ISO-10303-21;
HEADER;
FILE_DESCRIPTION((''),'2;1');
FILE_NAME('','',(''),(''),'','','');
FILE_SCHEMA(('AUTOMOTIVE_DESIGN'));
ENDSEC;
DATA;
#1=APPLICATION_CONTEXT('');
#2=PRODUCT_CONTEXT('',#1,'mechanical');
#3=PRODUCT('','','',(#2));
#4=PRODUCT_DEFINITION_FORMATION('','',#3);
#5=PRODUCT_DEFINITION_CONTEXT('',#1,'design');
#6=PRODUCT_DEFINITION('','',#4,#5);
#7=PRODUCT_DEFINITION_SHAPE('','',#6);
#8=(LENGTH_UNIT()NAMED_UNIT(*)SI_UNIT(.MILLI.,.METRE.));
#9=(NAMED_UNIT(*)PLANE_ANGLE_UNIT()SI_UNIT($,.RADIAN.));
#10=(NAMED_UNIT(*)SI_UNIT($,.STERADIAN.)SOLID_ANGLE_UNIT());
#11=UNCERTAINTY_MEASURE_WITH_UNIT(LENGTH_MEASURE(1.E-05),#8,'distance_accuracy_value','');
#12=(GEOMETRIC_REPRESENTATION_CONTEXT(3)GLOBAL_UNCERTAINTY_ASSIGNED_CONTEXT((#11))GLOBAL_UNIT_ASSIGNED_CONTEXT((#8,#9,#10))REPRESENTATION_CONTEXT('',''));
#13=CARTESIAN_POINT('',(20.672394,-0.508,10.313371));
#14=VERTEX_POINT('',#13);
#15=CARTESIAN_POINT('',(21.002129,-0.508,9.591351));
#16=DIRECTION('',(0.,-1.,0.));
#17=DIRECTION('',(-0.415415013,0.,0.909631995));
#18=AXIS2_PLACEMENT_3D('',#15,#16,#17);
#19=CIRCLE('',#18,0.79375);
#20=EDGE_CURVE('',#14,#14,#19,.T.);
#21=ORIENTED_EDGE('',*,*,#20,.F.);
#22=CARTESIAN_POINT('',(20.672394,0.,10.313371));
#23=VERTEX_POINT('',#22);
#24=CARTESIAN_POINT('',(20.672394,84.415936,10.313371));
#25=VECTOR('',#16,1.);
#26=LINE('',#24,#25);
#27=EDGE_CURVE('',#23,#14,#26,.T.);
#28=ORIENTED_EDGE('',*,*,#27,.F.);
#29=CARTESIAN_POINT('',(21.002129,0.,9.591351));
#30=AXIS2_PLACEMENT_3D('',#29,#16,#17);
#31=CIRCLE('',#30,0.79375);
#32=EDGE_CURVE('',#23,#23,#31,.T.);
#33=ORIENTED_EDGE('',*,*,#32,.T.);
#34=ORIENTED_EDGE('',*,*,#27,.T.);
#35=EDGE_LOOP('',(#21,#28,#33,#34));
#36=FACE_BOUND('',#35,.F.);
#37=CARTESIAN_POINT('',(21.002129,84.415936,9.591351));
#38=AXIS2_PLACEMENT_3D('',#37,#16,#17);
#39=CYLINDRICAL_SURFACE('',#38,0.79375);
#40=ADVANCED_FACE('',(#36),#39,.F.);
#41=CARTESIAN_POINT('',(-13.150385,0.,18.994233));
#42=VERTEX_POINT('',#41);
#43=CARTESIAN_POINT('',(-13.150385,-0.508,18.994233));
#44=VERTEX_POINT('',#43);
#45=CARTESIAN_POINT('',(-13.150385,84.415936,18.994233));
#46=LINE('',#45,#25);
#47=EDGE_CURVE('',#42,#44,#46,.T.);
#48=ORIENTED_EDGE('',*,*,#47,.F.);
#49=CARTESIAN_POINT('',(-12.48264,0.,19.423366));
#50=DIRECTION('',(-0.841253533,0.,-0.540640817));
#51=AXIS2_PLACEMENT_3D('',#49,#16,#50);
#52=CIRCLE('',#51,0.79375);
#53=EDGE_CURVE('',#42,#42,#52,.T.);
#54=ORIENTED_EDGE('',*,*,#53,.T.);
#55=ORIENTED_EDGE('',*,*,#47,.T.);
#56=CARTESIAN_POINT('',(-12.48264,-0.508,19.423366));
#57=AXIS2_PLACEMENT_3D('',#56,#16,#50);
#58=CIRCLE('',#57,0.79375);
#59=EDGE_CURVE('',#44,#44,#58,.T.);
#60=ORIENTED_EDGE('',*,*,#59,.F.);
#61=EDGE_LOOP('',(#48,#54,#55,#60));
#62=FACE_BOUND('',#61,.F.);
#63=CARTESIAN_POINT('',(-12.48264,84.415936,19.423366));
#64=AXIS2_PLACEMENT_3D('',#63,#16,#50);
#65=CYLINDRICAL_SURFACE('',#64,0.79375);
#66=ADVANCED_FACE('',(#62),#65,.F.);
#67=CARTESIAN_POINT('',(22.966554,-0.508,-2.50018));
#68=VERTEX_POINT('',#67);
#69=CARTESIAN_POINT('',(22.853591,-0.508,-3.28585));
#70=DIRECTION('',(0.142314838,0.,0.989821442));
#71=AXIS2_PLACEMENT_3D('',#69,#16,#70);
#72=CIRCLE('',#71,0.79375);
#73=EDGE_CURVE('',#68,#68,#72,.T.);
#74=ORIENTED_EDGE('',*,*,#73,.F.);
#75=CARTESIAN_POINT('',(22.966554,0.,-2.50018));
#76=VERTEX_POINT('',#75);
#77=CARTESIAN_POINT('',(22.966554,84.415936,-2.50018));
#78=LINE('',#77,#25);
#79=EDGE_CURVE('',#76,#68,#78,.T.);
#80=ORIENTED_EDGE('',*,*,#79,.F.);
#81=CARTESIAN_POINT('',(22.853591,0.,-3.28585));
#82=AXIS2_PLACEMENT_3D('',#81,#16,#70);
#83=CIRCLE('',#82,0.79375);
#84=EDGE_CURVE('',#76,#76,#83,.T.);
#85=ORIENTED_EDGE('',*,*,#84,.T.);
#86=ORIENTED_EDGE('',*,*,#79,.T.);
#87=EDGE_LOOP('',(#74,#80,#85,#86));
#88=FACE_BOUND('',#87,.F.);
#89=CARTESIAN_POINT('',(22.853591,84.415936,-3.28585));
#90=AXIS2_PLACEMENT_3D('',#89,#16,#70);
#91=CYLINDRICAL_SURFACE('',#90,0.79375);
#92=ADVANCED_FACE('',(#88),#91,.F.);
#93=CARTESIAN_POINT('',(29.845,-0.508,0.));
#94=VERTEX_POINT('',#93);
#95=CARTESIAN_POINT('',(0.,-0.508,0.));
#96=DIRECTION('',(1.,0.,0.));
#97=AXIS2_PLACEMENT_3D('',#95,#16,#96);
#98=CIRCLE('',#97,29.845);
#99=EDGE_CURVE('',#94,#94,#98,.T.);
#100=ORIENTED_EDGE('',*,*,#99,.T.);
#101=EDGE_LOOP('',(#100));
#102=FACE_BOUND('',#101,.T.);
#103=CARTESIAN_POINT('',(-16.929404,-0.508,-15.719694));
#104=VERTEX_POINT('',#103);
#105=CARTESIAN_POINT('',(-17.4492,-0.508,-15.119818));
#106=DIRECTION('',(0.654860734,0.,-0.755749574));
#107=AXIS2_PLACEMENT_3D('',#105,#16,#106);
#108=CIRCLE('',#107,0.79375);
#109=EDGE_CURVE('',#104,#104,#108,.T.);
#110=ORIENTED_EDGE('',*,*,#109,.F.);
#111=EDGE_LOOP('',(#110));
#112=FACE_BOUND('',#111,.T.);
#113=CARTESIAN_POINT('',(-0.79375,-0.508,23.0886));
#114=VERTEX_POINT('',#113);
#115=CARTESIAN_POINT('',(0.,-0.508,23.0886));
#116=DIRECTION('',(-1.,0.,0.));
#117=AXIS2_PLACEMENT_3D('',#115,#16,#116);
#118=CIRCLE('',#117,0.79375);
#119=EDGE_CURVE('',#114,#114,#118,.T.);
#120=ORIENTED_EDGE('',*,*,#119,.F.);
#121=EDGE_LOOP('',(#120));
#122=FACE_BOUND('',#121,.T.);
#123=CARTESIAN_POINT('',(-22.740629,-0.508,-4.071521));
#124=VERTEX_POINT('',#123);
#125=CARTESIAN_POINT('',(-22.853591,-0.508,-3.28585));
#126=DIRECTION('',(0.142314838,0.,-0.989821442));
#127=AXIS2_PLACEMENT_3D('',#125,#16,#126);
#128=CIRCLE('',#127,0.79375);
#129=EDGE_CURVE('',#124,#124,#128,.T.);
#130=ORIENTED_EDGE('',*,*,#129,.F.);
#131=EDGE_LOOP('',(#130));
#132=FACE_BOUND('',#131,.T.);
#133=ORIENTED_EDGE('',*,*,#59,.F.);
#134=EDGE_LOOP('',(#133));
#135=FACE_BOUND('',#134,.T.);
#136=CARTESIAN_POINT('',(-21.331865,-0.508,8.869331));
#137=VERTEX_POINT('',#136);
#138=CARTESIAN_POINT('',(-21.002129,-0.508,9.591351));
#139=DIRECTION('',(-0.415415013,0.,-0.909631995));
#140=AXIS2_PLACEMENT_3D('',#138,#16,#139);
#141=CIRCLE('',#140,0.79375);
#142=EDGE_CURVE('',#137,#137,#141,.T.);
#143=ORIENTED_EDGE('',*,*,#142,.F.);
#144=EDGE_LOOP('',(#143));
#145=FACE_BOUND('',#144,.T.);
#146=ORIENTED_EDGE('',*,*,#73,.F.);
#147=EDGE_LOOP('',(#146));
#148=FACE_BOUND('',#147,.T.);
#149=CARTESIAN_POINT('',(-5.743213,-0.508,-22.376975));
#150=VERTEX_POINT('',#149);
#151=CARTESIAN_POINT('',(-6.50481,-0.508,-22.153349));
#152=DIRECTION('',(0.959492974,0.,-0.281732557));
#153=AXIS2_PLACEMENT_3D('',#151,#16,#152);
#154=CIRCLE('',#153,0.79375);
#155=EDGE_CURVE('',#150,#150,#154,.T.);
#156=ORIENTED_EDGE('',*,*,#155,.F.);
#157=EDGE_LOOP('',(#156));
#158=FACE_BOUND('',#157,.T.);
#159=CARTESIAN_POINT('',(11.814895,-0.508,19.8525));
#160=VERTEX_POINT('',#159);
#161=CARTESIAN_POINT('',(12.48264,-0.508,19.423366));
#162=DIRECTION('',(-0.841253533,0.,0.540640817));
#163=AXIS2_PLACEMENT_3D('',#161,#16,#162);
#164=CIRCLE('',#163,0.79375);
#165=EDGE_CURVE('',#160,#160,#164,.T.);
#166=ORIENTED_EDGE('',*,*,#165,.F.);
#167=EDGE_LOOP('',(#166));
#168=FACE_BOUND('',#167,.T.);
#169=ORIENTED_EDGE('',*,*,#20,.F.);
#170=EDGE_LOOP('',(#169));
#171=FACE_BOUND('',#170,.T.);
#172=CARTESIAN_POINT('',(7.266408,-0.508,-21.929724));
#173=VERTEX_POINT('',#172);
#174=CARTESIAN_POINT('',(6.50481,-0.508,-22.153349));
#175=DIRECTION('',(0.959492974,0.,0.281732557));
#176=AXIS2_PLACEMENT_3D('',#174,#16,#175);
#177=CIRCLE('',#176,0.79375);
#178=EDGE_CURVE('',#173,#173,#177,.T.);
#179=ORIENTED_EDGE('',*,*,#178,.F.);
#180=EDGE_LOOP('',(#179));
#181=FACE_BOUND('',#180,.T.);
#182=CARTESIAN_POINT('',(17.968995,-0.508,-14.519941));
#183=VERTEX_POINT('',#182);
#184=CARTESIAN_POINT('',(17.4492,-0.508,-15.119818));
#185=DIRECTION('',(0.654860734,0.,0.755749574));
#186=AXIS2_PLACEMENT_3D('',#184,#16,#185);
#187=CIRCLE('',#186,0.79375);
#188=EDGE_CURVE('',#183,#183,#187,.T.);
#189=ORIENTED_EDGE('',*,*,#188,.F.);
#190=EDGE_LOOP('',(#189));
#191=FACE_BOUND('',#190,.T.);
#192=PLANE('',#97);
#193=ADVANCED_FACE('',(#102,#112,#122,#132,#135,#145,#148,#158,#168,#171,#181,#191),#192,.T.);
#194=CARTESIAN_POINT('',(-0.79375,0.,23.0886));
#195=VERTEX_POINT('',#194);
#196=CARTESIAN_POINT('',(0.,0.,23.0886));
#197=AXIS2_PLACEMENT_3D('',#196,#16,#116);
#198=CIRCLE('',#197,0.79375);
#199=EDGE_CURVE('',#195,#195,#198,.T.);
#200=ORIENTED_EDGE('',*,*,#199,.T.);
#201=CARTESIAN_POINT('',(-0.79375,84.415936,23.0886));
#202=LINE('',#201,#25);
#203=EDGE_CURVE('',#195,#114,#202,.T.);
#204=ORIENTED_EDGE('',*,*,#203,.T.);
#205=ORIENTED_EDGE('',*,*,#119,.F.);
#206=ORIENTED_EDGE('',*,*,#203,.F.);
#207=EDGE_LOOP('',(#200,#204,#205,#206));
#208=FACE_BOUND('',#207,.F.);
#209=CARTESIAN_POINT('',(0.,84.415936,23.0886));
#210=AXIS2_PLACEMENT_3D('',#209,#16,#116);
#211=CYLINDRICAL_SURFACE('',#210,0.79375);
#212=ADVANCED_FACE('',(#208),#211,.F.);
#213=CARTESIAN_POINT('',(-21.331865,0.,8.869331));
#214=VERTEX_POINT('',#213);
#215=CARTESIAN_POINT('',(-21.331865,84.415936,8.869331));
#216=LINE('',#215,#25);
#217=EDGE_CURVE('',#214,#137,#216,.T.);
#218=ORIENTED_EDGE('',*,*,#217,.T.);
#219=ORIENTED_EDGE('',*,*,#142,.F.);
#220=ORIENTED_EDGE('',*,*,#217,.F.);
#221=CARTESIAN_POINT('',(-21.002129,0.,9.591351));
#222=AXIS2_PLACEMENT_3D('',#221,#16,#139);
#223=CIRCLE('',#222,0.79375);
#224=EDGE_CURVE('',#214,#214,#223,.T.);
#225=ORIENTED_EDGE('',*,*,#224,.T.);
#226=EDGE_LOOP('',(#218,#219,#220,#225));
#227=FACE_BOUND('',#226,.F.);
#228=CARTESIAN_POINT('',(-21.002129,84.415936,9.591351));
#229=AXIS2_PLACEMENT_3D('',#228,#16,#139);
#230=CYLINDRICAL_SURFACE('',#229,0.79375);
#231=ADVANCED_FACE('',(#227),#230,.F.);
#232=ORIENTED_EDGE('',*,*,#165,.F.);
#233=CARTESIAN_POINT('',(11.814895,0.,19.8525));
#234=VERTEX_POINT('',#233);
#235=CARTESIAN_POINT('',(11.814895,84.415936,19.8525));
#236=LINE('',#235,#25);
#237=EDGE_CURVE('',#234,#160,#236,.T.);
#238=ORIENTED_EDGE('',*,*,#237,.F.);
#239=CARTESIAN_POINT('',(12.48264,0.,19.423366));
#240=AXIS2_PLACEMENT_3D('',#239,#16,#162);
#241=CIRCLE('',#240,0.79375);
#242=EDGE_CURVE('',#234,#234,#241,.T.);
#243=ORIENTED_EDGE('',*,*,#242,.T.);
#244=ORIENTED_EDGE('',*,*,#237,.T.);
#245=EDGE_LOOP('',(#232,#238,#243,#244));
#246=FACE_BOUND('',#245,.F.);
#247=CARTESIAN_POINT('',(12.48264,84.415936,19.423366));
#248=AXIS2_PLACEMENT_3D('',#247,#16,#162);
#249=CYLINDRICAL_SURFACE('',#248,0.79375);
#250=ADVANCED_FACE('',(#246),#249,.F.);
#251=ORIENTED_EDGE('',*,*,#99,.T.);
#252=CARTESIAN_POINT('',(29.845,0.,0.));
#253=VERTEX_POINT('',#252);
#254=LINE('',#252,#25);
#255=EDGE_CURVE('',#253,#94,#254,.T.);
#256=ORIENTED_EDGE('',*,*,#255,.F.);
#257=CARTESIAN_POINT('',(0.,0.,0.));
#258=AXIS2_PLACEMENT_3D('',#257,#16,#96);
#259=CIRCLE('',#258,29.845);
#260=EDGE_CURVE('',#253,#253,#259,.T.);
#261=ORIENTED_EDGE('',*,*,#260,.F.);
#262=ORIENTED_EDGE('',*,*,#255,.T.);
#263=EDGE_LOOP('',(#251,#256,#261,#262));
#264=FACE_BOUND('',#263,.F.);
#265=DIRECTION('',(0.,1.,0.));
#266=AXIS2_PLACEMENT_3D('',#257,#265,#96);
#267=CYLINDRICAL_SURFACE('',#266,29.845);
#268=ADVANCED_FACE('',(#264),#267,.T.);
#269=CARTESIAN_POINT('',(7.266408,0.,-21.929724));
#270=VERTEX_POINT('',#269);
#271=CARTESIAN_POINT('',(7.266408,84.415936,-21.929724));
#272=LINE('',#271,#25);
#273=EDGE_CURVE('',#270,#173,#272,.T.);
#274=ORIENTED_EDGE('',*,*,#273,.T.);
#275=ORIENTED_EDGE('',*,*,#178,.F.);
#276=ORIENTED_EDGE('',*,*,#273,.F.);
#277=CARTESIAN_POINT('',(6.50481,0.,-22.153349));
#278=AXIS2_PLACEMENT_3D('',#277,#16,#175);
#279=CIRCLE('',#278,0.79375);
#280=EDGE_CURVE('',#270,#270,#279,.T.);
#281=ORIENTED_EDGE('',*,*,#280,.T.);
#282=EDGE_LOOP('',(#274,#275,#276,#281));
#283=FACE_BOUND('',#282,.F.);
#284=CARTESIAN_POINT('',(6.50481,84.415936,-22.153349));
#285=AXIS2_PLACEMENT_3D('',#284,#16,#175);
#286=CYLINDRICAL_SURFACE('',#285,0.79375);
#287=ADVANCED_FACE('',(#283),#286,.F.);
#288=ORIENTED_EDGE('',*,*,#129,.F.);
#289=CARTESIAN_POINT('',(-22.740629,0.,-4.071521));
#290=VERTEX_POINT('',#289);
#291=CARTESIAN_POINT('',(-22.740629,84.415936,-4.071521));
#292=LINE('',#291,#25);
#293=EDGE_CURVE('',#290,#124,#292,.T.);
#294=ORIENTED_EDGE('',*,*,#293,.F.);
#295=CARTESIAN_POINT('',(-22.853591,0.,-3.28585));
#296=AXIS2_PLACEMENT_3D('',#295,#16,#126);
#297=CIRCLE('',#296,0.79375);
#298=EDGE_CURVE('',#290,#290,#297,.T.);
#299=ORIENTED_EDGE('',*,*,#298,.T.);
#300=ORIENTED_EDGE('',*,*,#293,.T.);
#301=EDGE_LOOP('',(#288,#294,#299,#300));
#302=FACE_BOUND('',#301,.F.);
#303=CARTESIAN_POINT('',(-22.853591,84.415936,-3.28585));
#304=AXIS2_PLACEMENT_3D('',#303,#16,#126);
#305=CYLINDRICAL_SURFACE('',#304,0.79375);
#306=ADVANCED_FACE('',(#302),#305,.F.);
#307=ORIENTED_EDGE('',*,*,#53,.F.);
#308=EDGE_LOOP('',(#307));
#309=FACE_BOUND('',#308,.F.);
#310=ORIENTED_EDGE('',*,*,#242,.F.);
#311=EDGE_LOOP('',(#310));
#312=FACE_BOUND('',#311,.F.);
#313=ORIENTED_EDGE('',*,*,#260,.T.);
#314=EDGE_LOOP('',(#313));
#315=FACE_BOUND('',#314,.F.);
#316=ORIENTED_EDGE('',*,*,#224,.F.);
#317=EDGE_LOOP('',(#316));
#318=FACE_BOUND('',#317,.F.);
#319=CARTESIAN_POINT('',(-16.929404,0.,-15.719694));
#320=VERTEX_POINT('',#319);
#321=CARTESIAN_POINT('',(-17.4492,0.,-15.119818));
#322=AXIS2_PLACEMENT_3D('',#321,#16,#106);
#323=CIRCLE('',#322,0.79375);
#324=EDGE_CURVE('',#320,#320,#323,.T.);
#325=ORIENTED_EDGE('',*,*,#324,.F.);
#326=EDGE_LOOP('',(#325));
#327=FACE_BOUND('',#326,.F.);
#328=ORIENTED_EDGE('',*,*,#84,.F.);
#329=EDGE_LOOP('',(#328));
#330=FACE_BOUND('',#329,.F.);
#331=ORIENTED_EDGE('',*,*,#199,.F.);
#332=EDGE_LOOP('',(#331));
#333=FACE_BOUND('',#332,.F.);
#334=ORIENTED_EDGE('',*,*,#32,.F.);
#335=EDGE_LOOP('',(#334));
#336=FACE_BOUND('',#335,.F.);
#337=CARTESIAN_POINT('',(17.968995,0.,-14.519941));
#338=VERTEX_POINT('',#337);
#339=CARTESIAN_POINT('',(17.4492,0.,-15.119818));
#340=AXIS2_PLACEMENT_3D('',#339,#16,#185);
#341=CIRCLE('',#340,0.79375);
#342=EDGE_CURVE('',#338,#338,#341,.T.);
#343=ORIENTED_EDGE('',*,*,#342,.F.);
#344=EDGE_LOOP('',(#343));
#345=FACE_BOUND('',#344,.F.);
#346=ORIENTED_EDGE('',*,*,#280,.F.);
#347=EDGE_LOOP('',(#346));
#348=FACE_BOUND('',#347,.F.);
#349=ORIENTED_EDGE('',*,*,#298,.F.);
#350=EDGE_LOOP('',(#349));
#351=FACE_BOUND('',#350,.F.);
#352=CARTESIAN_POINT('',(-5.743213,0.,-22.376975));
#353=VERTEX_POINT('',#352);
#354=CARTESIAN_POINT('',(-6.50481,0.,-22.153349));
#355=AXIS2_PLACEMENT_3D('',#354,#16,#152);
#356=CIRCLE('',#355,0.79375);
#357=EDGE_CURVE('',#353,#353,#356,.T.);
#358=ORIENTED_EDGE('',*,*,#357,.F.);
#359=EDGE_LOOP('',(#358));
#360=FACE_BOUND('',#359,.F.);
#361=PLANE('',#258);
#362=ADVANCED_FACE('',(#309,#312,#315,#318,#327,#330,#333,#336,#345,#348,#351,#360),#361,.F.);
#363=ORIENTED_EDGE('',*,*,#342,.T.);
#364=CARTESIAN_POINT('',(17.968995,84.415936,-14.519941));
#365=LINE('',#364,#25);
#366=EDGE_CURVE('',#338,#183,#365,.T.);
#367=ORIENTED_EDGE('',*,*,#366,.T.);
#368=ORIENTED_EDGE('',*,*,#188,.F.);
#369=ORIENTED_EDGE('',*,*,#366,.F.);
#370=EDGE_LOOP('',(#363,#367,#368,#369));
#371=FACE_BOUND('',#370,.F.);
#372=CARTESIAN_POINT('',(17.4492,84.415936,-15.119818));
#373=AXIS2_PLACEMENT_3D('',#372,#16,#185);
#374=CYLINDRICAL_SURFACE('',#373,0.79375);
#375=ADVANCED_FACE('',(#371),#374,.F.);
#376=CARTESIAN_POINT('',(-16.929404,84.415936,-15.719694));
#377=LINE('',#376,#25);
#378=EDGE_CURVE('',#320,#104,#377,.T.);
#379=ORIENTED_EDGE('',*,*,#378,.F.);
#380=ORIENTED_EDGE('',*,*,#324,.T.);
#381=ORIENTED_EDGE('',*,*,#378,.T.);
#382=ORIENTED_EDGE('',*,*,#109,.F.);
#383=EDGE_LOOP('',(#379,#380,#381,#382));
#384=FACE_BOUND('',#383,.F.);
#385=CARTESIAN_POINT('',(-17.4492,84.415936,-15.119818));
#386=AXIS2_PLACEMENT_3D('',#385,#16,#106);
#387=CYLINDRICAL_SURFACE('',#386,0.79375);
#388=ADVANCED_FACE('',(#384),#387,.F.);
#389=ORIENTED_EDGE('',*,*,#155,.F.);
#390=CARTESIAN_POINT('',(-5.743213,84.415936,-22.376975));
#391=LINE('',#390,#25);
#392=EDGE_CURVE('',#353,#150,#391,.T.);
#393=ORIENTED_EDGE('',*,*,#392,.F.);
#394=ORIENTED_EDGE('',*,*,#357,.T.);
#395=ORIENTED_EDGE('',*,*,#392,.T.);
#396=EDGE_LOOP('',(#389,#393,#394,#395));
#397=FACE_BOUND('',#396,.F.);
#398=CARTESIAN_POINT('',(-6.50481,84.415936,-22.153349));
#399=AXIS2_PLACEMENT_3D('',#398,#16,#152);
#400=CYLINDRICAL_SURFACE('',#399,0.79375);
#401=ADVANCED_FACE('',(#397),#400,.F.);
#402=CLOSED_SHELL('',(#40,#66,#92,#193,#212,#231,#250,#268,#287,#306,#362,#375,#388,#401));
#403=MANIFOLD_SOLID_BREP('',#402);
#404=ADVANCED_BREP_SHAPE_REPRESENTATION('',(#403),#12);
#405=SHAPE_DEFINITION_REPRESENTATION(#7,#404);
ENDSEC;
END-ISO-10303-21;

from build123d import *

# Parameters (mm, degrees)
F0_R            = 29.845
F1_DEPTH        = 0.508
F2_D            = 1.5875
F2_COPIES_COUNT = 11


# Not quite as in the source:
# - a pattern or mirror of a feature is missing from the dataset's text; its kind, count and spacing are read off the source's solid


with BuildPart() as f1:
    # F0 (on Front) → F1 (new body)
    with BuildSketch(Plane.XZ):
        Circle(F0_R)
    extrude(amount=F1_DEPTH)

    # F2 (through all)
    with Locations(Plane(origin=(0, 0, 0), x_dir=(1, 0, 0), z_dir=(0, 1, 0))):
        with Locations((0, -23.0886)):
            f2 = Hole(F2_D / 2)

    # F2_copies: F2 ×11 about axis
    f2_copies_axis = Axis((0, 0, 0), (0, 1, 0))
    for i in range(1, F2_COPIES_COUNT):
        add(f2.rotate(f2_copies_axis, i * 360 / F2_COPIES_COUNT), mode=Mode.SUBTRACT)


solid = f1.part
